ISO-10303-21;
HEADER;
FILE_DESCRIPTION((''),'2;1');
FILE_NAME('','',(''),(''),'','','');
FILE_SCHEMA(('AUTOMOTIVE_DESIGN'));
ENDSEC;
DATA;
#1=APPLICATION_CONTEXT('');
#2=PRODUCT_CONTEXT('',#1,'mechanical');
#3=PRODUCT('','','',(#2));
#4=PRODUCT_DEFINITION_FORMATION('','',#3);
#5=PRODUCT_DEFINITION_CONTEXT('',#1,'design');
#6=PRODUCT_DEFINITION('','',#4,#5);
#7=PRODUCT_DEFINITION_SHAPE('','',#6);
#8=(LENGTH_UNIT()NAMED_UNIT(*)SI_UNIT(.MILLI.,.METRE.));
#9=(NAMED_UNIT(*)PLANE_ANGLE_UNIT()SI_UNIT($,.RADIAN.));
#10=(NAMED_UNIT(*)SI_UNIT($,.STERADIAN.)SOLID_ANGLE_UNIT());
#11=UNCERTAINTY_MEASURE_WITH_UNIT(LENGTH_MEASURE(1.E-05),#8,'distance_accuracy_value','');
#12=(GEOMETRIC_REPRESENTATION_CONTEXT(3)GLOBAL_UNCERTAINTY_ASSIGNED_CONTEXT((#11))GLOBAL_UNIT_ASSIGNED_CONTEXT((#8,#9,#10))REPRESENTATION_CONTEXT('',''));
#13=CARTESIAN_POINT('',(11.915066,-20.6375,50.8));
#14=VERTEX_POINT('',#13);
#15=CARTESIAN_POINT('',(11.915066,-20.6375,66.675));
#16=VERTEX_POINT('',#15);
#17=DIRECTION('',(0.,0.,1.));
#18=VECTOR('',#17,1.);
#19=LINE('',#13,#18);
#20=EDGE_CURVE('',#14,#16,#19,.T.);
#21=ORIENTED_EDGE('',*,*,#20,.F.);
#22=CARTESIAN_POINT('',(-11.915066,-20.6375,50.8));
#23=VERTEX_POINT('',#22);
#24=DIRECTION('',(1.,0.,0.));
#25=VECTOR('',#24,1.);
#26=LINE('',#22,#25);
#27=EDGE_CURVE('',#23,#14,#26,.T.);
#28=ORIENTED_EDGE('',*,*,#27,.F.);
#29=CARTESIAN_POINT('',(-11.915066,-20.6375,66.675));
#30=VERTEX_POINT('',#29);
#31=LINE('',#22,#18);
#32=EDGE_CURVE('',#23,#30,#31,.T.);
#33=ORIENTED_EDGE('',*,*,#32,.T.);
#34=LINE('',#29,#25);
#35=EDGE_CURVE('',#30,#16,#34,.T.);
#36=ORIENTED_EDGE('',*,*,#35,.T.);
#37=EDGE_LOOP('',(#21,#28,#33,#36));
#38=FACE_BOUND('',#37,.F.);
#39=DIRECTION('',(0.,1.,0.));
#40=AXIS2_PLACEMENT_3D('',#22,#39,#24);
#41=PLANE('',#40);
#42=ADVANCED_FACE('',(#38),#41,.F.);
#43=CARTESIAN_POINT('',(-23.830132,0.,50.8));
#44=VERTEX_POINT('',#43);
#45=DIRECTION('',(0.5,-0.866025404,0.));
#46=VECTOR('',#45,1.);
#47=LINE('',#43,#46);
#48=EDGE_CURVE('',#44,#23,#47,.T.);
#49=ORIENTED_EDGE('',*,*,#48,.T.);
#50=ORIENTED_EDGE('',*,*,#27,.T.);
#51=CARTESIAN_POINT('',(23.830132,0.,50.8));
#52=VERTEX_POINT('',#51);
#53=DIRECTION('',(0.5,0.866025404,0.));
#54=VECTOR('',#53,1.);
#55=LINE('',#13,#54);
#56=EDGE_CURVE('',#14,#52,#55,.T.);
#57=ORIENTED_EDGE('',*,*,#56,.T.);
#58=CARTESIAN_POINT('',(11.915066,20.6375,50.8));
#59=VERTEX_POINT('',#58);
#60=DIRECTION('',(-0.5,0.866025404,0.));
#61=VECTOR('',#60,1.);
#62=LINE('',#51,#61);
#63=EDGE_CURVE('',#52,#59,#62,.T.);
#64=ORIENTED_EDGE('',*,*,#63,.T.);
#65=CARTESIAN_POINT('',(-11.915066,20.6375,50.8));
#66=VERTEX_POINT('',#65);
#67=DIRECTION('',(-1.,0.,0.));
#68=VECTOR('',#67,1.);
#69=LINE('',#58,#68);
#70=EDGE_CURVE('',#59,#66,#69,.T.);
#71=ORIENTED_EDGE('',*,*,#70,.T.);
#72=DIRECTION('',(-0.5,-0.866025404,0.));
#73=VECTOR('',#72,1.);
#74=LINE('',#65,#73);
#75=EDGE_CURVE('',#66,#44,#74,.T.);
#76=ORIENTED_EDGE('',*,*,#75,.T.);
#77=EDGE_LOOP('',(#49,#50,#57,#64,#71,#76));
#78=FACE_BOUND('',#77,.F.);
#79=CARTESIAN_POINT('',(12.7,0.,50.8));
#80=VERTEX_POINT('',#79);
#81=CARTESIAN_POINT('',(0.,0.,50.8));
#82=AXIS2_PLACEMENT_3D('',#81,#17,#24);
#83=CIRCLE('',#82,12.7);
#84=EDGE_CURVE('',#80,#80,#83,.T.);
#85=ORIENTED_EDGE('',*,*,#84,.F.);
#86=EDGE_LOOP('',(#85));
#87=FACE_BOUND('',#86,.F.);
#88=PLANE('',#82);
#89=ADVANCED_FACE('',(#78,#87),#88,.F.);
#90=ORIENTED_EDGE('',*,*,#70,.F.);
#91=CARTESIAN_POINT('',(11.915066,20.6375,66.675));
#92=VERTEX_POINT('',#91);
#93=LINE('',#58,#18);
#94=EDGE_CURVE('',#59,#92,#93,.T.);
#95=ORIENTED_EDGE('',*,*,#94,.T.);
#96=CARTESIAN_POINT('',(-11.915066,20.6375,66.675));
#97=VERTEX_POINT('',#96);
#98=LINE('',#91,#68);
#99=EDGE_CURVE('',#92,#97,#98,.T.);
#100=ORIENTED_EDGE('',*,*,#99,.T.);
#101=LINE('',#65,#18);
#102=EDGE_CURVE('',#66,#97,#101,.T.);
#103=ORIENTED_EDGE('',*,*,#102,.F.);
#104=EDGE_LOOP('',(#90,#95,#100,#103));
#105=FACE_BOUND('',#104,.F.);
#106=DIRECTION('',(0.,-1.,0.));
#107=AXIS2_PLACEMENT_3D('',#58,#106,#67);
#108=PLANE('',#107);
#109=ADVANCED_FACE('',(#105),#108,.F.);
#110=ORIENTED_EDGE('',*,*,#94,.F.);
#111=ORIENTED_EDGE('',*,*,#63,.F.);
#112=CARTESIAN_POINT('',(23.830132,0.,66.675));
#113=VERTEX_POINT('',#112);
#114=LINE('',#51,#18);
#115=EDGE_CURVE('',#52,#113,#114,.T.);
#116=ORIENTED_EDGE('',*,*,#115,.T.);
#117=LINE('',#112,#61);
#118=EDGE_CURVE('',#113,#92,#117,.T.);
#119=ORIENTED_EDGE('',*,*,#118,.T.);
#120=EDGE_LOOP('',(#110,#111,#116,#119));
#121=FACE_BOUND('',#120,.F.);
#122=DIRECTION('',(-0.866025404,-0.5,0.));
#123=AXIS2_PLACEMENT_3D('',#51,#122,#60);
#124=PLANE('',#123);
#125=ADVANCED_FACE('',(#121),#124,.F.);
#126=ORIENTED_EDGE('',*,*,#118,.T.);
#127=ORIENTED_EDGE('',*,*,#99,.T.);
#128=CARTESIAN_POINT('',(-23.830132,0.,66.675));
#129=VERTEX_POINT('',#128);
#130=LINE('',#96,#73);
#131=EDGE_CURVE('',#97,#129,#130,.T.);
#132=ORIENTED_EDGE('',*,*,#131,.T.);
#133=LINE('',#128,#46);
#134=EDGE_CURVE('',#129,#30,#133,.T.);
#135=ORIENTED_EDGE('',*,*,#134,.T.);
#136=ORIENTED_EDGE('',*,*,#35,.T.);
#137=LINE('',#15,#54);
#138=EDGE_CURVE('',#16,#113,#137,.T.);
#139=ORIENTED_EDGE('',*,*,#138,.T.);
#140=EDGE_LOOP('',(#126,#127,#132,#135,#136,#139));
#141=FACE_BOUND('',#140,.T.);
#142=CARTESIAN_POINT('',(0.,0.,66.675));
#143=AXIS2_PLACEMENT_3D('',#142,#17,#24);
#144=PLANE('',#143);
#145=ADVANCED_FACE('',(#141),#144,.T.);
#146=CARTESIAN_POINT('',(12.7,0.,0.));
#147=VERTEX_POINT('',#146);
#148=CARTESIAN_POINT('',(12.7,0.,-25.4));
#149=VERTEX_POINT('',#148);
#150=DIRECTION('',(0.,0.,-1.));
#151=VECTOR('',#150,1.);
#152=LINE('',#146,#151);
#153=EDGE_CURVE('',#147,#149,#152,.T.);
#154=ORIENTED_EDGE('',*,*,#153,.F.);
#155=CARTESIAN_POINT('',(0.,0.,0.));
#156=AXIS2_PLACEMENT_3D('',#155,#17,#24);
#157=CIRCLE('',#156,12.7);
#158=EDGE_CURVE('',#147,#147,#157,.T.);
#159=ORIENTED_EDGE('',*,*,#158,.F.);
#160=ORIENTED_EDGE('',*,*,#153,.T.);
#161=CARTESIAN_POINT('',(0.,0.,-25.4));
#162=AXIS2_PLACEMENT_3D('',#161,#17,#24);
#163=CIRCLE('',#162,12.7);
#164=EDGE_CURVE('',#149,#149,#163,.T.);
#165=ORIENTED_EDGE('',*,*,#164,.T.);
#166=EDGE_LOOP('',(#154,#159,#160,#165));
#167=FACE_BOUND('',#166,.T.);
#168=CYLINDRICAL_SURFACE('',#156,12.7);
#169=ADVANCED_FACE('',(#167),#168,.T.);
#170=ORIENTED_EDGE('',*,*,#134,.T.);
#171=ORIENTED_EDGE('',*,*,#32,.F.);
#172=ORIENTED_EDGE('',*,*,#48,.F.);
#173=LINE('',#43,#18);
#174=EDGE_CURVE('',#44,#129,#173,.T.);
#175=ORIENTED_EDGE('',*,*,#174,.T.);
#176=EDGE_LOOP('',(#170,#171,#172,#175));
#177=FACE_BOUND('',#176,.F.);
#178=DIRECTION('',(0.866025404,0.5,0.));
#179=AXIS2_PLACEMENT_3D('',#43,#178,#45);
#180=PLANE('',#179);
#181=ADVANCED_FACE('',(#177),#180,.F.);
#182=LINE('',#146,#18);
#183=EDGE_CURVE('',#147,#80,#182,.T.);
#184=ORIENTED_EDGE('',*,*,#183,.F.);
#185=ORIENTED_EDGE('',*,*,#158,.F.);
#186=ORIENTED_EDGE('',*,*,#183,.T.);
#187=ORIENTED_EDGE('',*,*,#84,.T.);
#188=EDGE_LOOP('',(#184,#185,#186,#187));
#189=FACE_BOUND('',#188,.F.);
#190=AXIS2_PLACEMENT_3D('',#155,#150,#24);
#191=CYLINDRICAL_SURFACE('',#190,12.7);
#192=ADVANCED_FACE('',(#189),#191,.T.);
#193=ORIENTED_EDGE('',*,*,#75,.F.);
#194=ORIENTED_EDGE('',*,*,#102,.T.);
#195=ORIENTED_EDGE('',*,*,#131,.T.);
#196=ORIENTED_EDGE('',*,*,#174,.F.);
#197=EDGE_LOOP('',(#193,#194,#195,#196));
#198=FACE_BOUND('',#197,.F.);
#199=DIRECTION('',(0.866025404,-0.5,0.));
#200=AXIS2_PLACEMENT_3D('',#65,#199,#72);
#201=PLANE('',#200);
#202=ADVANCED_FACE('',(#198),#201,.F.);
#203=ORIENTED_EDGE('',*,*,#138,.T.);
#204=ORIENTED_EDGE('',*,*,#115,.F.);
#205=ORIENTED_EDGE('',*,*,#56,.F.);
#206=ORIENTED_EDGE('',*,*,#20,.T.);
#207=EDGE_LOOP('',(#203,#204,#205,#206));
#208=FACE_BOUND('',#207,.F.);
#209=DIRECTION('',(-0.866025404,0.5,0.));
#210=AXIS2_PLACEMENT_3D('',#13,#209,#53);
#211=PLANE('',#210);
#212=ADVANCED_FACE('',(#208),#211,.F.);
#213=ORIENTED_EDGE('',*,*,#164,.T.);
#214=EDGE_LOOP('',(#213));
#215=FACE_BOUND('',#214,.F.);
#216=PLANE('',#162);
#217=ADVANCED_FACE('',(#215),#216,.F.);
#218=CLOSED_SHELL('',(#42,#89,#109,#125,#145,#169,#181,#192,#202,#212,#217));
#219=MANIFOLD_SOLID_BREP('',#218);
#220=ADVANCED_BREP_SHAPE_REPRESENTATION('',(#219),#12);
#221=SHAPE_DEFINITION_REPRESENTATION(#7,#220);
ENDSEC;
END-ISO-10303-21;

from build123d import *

# Parameters (mm, degrees)
F0_R          = 12.7
F1_DEPTH      = 25.4
F1_DEPTH_BACK = 50.8
F3_DEPTH      = 15.875


# Not quite as in the source:
# - a feature names something its author has since deleted; it is built from what else it names


with BuildPart() as f1:
    # F0 (on Top) → F1 (new body, two sides)
    with BuildSketch(Plane.XY) as f1_sk:
        Circle(F0_R)
    extrude(amount=-F1_DEPTH)
    extrude(f1_sk.sketch, amount=F1_DEPTH_BACK)

    # F2 (on face) → F3 (join)
    with BuildSketch(Plane.XY.offset(50.8)):
        Polygon((11.9150661804, 20.6375), (-11.9150661804, 20.6375), (-23.8301323608, 0), (-11.9150661804, -20.6375), (11.9150661804, -20.6375), (23.8301323608, 0), align=None)
    extrude(amount=F3_DEPTH)


solid = f1.part
